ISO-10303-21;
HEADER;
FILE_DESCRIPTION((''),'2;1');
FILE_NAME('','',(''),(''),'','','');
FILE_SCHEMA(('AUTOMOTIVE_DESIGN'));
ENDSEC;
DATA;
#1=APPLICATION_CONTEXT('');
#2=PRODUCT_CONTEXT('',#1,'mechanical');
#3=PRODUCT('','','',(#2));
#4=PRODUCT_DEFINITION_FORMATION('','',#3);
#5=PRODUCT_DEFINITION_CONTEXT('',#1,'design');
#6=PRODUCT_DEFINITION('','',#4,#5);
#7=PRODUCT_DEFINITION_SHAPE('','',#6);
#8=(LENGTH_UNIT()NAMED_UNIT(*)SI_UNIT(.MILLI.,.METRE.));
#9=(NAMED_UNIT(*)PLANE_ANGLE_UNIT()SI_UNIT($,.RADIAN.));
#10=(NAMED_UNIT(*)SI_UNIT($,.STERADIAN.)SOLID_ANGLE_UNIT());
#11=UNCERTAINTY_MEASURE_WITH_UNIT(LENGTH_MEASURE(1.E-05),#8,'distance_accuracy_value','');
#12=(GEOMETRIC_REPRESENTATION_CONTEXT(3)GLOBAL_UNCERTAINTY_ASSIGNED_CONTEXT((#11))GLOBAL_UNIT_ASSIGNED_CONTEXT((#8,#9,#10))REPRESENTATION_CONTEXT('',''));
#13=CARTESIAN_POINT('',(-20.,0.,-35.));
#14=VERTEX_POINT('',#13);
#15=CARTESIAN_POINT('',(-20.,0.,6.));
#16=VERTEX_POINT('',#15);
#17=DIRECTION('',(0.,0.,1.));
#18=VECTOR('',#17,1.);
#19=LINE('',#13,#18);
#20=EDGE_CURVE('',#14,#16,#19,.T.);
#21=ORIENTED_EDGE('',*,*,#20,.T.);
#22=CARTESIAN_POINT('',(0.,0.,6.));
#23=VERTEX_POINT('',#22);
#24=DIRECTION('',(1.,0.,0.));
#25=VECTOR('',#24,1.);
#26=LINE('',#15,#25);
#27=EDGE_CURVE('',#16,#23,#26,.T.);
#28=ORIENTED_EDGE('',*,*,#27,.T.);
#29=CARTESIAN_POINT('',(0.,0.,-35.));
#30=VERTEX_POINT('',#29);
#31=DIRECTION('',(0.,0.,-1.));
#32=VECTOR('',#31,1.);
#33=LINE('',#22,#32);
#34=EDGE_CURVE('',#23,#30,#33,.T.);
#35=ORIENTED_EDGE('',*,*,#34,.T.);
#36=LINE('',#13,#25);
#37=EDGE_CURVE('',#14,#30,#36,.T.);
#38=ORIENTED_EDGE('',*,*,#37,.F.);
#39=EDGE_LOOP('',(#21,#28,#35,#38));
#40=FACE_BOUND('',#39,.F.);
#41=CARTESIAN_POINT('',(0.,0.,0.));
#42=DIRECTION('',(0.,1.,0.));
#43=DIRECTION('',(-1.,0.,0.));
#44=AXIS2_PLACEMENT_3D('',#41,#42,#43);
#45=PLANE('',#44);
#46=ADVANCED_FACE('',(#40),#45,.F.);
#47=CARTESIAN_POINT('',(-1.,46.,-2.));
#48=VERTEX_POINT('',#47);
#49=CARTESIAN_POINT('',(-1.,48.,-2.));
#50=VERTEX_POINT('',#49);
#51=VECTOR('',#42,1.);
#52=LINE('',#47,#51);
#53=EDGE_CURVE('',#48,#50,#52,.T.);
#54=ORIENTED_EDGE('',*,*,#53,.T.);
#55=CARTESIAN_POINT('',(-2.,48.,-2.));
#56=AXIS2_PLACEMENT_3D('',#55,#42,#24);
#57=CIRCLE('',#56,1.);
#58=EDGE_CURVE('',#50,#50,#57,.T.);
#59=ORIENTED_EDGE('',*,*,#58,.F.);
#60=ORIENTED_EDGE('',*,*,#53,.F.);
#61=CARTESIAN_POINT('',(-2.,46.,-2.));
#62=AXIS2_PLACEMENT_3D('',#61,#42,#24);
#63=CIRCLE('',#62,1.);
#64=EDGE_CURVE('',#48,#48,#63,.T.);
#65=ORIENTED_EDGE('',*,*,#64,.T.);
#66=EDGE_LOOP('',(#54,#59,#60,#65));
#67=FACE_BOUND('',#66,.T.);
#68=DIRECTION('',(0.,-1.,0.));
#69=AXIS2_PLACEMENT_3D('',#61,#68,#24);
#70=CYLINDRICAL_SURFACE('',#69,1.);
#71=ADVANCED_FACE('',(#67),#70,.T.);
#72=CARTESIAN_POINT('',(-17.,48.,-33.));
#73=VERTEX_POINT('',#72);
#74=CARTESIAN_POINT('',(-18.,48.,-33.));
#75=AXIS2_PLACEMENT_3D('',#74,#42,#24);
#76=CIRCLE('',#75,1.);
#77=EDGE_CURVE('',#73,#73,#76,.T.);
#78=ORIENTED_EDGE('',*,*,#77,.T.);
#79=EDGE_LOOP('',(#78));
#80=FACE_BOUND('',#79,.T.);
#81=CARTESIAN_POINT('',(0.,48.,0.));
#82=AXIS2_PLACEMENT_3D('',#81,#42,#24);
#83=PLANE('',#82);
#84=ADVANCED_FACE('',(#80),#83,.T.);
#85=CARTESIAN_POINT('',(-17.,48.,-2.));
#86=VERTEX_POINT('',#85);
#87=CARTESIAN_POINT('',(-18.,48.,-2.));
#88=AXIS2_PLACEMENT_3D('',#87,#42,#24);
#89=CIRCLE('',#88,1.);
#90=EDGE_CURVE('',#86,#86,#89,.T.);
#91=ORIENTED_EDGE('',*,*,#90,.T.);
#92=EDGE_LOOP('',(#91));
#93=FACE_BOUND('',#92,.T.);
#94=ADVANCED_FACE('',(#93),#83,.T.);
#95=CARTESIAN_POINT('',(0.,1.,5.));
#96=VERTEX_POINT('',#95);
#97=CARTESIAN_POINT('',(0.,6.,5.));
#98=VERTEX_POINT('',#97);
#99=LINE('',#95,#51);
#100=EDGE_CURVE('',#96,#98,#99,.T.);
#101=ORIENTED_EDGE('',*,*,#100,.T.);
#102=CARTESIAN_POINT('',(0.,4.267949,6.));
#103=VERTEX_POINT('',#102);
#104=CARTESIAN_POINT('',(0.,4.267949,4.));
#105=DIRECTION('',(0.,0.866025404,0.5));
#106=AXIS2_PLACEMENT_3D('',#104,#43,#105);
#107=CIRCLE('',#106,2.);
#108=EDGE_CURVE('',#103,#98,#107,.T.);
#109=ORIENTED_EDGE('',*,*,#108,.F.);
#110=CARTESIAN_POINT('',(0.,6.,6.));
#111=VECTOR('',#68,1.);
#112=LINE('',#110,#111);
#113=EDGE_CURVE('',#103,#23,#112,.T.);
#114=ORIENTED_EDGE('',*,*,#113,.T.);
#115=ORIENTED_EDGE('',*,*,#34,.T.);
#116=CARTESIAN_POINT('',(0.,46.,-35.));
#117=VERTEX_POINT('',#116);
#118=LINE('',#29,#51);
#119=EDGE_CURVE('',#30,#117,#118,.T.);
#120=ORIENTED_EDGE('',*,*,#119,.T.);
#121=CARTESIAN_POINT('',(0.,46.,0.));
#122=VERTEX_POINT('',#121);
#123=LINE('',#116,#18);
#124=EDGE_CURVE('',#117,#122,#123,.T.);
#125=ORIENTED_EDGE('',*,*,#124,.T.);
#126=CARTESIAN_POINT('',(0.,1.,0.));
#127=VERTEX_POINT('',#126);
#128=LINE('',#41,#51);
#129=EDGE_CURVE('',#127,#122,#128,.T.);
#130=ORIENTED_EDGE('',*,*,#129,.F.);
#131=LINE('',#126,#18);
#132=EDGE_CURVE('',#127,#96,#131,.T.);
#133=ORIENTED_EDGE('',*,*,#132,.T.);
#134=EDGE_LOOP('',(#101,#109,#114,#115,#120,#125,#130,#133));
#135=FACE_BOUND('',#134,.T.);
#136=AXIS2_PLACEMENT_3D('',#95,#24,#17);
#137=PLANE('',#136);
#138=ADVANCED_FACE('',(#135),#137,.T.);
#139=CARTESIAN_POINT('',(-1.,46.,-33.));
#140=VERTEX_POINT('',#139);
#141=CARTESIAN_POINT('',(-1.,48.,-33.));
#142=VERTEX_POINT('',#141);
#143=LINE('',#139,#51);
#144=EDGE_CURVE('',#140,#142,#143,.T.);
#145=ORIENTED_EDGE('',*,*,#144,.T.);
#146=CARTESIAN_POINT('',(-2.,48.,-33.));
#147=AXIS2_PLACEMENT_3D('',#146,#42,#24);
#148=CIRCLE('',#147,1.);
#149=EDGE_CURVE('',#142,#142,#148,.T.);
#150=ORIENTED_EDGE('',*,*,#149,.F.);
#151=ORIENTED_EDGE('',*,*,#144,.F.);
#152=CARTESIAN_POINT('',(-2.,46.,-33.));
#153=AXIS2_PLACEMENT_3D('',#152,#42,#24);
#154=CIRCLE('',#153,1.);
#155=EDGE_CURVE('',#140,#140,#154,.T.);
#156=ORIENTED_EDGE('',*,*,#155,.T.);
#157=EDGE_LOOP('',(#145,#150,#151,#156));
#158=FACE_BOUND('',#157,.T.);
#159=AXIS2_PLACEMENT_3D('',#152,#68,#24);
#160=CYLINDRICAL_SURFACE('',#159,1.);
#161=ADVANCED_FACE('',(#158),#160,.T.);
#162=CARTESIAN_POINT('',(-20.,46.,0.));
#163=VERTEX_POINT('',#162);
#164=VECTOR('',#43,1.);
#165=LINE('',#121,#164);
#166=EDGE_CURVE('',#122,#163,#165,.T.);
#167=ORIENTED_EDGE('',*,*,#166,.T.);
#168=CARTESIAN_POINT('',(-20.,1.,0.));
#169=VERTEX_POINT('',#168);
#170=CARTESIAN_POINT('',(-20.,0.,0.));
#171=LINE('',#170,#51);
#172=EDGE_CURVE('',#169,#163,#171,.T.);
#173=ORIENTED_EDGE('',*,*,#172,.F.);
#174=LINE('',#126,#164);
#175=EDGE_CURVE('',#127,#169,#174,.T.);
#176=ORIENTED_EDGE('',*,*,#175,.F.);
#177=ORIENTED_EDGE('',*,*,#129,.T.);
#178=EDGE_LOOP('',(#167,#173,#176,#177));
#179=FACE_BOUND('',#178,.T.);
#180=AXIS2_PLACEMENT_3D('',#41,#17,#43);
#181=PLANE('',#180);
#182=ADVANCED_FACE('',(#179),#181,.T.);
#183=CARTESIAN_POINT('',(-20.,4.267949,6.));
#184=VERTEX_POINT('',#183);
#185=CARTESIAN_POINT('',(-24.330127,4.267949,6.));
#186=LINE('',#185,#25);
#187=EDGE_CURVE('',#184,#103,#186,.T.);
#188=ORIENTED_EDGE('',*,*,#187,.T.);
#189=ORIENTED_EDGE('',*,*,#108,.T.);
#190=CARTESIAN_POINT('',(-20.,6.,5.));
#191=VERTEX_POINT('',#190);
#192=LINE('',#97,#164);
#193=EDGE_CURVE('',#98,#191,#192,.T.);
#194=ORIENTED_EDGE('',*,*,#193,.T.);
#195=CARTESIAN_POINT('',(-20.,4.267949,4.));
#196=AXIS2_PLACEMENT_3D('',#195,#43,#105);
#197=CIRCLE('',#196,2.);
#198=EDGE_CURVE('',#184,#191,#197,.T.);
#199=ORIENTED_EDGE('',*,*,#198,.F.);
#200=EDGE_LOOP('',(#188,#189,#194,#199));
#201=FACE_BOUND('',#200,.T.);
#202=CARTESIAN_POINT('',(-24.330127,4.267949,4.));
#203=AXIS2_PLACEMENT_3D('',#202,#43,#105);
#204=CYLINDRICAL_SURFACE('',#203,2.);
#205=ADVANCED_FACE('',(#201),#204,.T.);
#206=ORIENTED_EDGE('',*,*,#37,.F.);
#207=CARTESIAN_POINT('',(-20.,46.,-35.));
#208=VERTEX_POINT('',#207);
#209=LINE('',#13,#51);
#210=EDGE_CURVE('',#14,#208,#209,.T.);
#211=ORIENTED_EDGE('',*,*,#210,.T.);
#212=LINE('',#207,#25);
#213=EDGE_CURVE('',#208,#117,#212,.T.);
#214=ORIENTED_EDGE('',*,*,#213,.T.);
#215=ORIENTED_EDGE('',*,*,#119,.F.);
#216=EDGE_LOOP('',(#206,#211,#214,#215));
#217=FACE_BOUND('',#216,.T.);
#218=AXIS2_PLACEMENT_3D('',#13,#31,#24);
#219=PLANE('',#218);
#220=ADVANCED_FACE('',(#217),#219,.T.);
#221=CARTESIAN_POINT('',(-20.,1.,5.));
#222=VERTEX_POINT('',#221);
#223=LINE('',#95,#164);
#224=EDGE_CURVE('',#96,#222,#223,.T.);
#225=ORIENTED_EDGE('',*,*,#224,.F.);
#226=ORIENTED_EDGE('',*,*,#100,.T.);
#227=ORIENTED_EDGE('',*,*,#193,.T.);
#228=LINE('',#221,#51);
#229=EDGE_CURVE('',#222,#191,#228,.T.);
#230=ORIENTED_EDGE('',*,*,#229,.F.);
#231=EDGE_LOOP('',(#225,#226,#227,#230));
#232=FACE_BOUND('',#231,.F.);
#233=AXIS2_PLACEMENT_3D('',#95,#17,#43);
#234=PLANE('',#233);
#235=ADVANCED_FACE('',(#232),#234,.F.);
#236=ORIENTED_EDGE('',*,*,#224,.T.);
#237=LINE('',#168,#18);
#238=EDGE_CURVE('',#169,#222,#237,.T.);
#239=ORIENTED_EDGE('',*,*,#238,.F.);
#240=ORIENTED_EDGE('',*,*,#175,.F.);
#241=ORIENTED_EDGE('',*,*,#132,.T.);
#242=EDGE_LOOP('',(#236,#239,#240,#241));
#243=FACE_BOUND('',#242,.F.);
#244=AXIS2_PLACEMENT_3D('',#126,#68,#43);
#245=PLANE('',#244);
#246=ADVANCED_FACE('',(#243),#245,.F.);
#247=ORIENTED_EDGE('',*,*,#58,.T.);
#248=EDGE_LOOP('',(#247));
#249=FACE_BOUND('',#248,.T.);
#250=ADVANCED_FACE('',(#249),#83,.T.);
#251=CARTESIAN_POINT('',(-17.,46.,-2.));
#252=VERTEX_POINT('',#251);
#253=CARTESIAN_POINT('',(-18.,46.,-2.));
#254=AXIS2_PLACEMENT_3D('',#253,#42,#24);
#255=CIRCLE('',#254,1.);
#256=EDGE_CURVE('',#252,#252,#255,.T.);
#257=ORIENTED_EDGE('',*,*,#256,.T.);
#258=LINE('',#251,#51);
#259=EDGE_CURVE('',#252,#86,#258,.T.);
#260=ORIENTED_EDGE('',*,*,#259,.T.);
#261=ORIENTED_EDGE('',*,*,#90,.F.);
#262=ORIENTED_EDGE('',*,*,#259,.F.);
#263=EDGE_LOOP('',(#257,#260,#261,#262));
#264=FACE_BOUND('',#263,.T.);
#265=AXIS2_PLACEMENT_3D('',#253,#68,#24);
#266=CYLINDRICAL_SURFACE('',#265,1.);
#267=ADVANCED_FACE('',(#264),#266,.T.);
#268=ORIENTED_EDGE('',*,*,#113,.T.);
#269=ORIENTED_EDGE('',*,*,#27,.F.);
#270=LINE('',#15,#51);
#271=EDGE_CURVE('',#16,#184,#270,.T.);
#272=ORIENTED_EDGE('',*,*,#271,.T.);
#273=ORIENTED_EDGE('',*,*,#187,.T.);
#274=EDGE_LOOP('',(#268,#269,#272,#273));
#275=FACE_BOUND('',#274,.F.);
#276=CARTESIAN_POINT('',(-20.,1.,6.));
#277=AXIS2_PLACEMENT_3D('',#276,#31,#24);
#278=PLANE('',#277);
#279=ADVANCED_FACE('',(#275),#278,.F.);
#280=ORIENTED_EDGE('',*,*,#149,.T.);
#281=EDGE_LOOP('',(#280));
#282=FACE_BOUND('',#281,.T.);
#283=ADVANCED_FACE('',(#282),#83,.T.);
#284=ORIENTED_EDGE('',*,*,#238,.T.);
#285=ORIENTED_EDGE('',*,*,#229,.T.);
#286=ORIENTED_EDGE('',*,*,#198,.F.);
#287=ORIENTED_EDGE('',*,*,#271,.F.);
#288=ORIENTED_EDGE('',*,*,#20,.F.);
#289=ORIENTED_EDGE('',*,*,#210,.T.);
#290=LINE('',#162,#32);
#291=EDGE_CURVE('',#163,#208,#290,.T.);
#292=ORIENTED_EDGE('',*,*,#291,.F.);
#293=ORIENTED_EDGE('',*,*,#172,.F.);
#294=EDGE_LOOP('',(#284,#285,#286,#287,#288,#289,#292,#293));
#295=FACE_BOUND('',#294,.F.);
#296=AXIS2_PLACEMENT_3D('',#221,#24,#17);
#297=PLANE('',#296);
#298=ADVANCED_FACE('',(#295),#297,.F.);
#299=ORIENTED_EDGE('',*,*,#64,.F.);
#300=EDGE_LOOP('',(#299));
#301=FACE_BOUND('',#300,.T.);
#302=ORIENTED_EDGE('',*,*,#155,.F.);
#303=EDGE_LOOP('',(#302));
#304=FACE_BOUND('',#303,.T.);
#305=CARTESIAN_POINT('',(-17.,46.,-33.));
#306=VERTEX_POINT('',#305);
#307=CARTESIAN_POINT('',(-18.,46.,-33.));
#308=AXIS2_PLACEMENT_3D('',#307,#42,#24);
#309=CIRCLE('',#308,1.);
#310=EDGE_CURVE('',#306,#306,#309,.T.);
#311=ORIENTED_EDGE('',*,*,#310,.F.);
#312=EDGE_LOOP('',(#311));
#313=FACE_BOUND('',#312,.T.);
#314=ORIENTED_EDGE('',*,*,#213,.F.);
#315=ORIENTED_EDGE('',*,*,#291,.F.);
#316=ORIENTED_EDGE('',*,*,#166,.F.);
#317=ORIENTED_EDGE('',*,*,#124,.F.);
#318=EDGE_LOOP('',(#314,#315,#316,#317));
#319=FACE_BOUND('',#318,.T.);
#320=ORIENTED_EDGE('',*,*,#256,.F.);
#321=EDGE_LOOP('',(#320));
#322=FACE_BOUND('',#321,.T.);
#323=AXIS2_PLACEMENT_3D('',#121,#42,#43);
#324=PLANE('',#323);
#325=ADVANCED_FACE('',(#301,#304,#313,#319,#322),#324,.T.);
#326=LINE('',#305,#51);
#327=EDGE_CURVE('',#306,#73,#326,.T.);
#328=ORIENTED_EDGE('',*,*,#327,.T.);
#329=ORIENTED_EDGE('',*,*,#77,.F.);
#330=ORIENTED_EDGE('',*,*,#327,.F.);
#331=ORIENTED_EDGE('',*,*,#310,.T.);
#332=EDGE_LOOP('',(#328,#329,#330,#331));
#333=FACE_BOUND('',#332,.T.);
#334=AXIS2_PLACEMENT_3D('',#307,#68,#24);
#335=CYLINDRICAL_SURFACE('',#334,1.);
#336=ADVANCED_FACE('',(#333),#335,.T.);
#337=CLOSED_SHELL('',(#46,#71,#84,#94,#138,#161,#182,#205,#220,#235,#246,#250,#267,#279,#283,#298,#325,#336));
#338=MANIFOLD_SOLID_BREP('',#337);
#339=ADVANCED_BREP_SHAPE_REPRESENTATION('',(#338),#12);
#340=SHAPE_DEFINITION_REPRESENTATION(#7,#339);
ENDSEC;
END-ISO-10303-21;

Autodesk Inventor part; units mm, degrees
ref_plane "YZ Plane" through (0, 0, 0) normal (1, 0, 0) x (0, 1, 0)
ref_plane "XZ Plane" through (0, 0, 0) normal (0, 1, 0) x (-1, 0, 0)
ref_plane "XY Plane" through (0, 0, 0) normal (0, 0, 1) x (1, 0, 0)
sketch "Sketch1" plane through (0, 0, 0) normal (0, 1, 0) x (-1, 0, 0)
  line L0 (0, 0) -> (20, 0)
  line L1 (20, 0) -> (20, -35)
  line L2 (20, -35) -> (0, -35)
  line L3 (0, -35) -> (0, 0)
  dimension "d0" = 20
  dimension "d1" = 35
extrude "Extrusion1" add sketch "Sketch1" along normal blind 46
sketch "Sketch2" plane through (-20, 0, 0) normal (0, 0, 1) x (1, 0, 0)
  line L0 (0, 0) -> (0, 46) projected
  line L1 (20, 0) -> (20, 46) projected
  line L2 (0, 0) -> (20, 0)
  line L3 (20, 0) -> (20, 1)
  line L4 (20, 1) -> (0, 1)
  line L5 (0, 1) -> (0, 0)
  dimension "d4" = 1
extrude "Extrusion2" add sketch "Sketch2" along normal blind 6
sketch "Sketch3" plane through (-20, 1, 0) normal (0, 1, 0) x (1, 0, 0)
  line L0 (0, 35) -> (0, -6) projected
  line L1 (20, 35) -> (20, -6) projected
  line L2 (0, -6) -> (20, -6)
  line L3 (20, -6) -> (20, -5)
  line L4 (20, -5) -> (0, -5)
  line L5 (0, -5) -> (0, -6)
  point P0 (20, 0)
  dimension "d7" = 1
extrude "Extrusion3" add sketch "Sketch3" along normal blind 5
fillet "Fillet1" radius 2 1 edges at (-10, 6, 6)
sketch "Sketch4" plane through (0, 46, 0) normal (0, 1, 0) x (1, 0, 0)
  arc A0 (-20, 2) -> (-18, 0) centre (-18, 2) ccw projected
  circle A1 centre (-18, 2) radius 1
  arc A2 (-2, 0) -> (0, 2) centre (-2, 2) ccw projected
  circle A3 centre (-2, 2) radius 1
  arc A4 (0, 33) -> (-2, 35) centre (-2, 33) ccw projected
  circle A5 centre (-2, 33) radius 1
  arc A6 (-18, 35) -> (-20, 33) centre (-18, 33) ccw projected
  circle A7 centre (-18, 33) radius 1
  point P0 (0, 0)
  dimension "d11" = 2
  dimension "d12" = 2
  dimension "d13" = 2
  dimension "d14" = 2
extrude "Extrusion4" add sketch "Sketch4" along normal blind 2
properties part number "platform"
